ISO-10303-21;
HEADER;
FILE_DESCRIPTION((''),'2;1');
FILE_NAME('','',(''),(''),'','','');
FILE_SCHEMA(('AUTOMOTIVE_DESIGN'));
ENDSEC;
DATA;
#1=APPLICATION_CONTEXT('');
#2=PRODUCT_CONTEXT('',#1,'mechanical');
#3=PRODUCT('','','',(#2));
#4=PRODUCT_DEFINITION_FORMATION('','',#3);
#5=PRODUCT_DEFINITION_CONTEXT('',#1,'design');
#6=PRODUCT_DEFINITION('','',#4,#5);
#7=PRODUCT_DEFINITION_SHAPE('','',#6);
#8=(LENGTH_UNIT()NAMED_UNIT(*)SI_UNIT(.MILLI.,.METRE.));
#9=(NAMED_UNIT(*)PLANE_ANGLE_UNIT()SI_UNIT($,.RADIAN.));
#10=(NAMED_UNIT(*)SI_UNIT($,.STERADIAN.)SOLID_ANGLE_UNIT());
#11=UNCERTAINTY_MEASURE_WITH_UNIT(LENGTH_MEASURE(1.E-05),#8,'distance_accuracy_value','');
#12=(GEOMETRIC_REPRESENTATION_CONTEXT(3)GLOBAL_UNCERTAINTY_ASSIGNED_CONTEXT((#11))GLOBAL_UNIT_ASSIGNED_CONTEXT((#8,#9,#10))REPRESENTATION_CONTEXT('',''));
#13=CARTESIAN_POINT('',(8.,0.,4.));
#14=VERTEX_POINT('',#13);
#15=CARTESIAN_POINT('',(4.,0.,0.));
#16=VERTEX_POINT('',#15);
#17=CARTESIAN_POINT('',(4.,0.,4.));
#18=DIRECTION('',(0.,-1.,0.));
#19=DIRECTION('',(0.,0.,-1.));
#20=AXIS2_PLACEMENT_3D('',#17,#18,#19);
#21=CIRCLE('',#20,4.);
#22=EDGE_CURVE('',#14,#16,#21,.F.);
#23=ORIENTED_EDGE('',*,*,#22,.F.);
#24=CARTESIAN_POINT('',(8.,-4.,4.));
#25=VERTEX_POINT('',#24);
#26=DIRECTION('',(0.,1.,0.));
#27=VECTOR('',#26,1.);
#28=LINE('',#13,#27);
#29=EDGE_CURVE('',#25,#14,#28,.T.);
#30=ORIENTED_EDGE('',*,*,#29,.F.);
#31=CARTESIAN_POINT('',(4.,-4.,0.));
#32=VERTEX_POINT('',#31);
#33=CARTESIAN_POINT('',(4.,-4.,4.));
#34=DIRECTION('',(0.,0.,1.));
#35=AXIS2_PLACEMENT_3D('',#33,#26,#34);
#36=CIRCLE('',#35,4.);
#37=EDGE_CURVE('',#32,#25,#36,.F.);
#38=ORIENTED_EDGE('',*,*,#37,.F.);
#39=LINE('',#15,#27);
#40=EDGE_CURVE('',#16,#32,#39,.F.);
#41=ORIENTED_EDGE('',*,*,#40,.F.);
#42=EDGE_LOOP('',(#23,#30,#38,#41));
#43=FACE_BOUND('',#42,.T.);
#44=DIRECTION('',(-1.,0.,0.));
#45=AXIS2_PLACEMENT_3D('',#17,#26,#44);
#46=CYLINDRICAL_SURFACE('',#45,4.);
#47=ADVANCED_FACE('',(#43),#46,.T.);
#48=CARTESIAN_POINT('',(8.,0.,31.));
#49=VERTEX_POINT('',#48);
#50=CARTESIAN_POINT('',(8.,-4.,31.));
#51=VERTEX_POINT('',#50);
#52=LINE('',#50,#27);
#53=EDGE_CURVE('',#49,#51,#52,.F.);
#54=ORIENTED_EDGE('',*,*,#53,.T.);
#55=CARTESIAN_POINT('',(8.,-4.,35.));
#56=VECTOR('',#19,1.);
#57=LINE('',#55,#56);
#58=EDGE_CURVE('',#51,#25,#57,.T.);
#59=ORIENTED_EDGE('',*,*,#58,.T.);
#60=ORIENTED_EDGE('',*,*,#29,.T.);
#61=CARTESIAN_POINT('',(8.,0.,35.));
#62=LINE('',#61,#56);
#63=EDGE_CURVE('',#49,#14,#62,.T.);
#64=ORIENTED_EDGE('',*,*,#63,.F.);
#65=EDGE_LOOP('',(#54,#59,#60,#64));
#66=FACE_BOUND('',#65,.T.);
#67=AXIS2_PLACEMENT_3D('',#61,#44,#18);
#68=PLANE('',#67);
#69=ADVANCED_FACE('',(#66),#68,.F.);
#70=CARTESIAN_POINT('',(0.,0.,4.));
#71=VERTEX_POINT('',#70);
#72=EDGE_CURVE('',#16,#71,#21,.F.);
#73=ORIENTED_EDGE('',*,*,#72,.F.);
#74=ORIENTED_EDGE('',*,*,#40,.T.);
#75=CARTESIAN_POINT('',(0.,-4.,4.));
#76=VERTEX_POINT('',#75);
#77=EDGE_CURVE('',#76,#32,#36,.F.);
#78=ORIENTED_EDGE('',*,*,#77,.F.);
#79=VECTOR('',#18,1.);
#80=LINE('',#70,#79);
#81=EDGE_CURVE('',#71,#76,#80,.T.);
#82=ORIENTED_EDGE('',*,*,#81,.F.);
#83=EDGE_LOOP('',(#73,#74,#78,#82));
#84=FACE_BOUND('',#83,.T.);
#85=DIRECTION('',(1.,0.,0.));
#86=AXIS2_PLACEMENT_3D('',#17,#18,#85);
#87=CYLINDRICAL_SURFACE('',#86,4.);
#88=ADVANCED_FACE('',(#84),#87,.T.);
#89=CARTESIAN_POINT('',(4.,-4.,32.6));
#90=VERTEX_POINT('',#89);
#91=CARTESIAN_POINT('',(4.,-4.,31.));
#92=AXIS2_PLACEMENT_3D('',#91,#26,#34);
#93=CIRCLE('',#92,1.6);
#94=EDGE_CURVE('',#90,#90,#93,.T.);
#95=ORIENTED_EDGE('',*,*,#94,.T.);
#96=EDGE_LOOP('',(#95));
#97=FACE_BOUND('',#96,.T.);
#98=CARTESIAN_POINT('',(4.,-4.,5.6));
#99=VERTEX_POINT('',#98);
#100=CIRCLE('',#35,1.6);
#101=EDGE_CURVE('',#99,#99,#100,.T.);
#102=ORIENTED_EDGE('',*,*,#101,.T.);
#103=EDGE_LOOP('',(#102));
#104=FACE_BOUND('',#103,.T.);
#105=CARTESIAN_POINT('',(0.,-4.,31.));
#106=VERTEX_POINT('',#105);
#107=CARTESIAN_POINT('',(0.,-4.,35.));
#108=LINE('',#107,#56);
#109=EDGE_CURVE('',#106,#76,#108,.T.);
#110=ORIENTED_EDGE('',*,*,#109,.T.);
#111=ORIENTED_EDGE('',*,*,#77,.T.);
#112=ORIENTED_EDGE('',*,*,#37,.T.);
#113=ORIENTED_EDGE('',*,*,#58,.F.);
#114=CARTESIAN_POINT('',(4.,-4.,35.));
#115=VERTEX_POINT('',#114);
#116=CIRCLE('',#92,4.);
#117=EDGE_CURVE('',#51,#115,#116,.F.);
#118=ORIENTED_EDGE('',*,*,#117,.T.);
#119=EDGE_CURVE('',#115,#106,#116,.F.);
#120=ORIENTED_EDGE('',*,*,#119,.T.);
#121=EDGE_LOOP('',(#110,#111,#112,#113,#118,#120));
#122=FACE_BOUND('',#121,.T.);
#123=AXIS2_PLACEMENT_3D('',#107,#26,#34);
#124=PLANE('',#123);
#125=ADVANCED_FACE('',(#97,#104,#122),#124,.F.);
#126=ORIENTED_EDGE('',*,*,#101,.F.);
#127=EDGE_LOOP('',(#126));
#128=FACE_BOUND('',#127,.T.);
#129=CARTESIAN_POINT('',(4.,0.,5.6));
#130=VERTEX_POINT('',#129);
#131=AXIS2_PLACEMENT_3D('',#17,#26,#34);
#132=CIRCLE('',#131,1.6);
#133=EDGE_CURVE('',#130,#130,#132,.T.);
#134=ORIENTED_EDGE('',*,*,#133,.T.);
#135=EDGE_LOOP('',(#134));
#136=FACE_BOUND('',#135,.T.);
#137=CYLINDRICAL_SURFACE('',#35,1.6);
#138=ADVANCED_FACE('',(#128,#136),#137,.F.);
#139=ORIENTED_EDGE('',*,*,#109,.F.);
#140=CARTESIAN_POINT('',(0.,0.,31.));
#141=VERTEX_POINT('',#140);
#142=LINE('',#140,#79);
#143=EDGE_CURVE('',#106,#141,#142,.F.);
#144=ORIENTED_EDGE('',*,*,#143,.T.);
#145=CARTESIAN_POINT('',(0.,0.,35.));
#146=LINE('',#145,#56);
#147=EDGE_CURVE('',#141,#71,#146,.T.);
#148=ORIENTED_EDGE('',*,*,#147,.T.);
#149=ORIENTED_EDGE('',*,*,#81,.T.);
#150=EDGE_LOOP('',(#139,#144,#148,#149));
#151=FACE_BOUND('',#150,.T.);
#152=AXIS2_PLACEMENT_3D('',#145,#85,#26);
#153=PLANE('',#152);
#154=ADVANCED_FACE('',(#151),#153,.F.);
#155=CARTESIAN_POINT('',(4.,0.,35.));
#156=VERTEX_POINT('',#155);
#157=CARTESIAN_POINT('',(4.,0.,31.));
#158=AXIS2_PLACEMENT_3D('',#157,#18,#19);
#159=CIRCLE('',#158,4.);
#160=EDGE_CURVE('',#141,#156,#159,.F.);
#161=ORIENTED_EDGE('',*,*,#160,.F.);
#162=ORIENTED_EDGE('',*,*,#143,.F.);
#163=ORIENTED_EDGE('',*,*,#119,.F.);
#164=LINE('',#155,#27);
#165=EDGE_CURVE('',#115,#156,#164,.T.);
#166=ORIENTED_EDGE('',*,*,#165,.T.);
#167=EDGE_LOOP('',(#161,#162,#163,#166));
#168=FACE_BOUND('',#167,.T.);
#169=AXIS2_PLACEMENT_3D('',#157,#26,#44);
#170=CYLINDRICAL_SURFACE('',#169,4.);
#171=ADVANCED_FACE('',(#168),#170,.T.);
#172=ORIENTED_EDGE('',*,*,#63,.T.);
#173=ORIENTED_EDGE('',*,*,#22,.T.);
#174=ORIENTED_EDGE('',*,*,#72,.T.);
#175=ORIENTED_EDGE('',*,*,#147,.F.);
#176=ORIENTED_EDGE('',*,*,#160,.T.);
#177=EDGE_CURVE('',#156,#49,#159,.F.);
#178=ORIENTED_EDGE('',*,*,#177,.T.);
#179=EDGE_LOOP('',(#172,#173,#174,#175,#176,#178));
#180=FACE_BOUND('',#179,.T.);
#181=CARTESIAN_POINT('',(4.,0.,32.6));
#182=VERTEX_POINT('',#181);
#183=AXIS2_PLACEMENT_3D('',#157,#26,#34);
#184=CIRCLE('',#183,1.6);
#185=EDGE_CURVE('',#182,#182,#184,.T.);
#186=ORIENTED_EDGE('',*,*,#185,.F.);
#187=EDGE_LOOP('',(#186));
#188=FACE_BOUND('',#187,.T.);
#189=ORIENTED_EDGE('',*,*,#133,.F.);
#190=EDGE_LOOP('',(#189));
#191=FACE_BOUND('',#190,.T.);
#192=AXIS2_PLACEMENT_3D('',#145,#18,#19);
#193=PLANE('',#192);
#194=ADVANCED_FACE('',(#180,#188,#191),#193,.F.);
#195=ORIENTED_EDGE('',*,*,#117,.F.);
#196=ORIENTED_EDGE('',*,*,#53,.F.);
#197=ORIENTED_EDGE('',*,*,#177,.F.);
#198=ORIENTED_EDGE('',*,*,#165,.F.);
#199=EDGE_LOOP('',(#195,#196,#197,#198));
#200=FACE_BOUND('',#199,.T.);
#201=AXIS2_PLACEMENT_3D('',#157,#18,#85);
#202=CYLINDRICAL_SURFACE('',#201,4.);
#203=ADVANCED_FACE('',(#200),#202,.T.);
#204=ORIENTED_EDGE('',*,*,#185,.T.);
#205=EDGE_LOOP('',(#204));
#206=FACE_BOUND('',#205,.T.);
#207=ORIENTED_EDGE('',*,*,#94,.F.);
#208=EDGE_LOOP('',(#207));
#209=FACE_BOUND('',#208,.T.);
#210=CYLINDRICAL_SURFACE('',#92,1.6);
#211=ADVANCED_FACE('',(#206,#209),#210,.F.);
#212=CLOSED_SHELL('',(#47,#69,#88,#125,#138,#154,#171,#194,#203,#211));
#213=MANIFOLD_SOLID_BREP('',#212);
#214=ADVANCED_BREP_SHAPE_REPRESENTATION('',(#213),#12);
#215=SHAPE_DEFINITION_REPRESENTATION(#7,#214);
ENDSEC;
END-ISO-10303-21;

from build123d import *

# Parameters (mm, degrees)
SKETCH1_W           = 8
SKETCH1_H           = 4
BOSS_EXTRUDE1_DEPTH = 35
SKETCH2_R           = 1.6
CUT_EXTRUDE1_DEPTH  = 37.124783736
FILLET1_R           = 4


with BuildPart() as part:
    # Sketch1 → Boss-Extrude1 (new body)
    with BuildSketch(Plane.XY):
        with Locations((4, -2)):
            Rectangle(SKETCH1_W, SKETCH1_H)
    extrude(amount=BOSS_EXTRUDE1_DEPTH)

    # Sketch2 → Cut-Extrude1 (cut, through all)
    with BuildSketch(Plane(origin=(0, 0, 0), x_dir=(1, 0, 0), z_dir=(0, 1, 0))):
        with Locations(Location((4, -4, 0), (0, 0, 270))):
            Circle(SKETCH2_R)
        with Locations(Location((4, -31, 0), (0, 0, 270))):
            Circle(SKETCH2_R)
    extrude(amount=-CUT_EXTRUDE1_DEPTH, mode=Mode.SUBTRACT)

    # Fillet1
    fillet1_edges = [part.edges().sort_by_distance(p)[0] for p in [
        (0, -2, 0),
        (8, -2, 0),
        (0, -2, 35),
        (8, -2, 35),
    ]]
    fillet(fillet1_edges, radius=FILLET1_R - 0.0001)  # a hair under: the kernel refuses the full size


solid = part.part
